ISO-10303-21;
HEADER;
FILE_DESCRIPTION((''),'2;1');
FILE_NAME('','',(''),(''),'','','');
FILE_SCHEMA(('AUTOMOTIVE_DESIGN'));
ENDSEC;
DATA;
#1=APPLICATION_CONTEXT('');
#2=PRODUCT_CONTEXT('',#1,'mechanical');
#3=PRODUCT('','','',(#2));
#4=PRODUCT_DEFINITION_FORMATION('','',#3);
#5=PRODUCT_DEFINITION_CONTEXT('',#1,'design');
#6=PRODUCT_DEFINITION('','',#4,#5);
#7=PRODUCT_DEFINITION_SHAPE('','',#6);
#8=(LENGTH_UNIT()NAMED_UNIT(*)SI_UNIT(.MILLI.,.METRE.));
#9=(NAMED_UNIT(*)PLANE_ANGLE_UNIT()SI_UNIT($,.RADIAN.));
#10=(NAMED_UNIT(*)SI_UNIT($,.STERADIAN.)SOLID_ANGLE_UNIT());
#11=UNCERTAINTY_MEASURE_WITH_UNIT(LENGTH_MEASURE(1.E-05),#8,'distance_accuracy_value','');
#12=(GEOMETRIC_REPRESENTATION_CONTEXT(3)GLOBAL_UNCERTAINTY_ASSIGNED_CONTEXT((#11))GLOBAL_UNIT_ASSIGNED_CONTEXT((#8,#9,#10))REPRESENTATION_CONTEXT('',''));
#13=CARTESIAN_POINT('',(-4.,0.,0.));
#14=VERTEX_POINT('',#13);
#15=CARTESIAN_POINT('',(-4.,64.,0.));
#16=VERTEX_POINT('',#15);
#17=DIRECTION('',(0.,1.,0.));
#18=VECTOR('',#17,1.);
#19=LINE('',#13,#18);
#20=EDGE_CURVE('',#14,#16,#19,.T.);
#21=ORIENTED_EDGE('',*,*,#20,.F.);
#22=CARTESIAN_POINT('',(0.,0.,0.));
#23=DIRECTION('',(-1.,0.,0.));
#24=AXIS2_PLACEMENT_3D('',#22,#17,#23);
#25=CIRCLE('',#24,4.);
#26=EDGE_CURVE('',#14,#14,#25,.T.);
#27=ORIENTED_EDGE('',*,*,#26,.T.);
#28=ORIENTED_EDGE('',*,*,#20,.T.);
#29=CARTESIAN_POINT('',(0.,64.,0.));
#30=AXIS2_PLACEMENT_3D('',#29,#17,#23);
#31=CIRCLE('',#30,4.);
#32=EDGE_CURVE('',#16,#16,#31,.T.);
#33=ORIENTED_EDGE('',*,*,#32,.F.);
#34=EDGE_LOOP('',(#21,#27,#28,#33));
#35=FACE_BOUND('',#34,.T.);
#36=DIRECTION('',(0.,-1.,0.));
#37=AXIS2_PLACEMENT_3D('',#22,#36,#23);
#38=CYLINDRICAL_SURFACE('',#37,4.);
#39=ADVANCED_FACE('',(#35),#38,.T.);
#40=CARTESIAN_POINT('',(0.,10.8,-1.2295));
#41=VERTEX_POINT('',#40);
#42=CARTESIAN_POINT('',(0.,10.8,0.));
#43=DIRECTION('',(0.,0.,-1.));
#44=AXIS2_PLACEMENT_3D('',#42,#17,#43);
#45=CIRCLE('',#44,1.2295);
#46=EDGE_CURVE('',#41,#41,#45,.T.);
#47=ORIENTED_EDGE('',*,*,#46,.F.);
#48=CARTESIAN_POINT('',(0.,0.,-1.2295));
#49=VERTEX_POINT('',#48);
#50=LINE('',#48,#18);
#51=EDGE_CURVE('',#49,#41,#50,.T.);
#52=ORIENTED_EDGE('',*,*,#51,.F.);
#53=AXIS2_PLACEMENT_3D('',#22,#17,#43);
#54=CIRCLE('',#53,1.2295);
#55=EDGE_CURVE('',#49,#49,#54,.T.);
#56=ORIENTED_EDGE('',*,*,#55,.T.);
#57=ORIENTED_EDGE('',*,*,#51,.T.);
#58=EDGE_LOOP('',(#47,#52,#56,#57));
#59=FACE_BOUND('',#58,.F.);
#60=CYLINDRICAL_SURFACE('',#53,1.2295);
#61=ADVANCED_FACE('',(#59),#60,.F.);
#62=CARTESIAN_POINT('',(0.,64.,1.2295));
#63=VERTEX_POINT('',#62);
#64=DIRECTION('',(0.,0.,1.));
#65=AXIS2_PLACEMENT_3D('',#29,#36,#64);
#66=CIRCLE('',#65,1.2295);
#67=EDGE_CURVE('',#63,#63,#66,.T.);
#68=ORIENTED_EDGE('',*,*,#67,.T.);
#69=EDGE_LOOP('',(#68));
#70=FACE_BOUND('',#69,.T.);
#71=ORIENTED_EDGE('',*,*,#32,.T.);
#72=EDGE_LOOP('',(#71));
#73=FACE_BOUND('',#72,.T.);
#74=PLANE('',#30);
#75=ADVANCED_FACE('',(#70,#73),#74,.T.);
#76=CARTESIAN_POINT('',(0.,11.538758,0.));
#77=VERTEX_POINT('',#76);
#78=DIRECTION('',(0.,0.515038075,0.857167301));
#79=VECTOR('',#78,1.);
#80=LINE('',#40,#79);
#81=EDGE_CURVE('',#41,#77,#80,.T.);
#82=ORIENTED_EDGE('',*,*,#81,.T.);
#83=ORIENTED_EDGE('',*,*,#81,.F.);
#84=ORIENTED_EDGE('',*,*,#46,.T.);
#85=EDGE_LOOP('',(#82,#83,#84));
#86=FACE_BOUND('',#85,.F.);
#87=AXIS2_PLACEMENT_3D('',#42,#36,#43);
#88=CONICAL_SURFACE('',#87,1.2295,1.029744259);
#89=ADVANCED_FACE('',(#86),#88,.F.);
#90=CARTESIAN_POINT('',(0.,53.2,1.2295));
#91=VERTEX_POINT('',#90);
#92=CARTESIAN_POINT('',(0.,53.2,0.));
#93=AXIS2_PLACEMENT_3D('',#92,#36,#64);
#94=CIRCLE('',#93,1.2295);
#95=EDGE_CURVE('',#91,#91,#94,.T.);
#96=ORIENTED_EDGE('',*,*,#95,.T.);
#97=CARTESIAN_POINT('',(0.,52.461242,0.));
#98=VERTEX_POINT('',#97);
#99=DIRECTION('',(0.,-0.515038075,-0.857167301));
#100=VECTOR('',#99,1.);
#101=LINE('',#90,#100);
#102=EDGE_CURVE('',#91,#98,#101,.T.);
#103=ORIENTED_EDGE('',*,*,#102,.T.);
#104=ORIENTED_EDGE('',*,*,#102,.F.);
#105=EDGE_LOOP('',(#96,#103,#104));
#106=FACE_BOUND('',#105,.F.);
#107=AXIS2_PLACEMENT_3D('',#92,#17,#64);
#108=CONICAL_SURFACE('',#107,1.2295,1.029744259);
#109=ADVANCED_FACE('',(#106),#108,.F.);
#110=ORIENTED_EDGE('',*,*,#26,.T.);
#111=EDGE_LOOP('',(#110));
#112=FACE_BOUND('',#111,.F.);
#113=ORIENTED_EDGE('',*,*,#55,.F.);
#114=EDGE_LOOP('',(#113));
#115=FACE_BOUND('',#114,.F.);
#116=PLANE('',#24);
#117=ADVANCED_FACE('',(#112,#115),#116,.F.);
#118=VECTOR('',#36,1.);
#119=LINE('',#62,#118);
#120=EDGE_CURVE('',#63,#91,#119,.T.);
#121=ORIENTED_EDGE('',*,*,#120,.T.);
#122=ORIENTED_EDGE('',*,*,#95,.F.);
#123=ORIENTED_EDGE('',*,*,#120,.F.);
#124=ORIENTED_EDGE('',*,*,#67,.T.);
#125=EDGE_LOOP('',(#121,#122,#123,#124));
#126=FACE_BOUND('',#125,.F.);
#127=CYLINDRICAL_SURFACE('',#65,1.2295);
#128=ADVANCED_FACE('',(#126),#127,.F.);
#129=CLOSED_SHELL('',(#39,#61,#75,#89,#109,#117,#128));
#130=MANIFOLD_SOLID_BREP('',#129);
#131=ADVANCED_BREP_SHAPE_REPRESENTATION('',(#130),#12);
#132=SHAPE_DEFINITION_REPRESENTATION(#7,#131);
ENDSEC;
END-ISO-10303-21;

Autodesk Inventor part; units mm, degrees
ref_plane "YZ Plane" through (0, 0, 0) normal (1, 0, 0) x (0, 1, 0)
ref_plane "XZ Plane" through (0, 0, 0) normal (0, 1, 0) x (-1, 0, 0)
ref_plane "XY Plane" through (0, 0, 0) normal (0, 0, 1) x (1, 0, 0)
sketch "Sketch1" plane through (0, 0, 0) normal (0, 1, 0) x (-1, 0, 0)
  circle A0 centre (0, 0) radius 4
  dimension "d0" = 8
extrude "Extrusion1" add sketch "Sketch1" along normal blind 64
sketch "Sketch2" plane through (0, 64, 0) normal (0, 1, 0) x (1, 0, 0)
  point P0 (0, 0)
  point P1 (0, 0)
sketch "Sketch3" plane through (0, 0, 0) normal (0, -1, 0) x (1, 0, 0)
  point P0 (0, 0)
  point P1 (0, 0)
hole "Hole1" at (0, 64, 0) direction (0, -1, 0) diameter 2.459 depth 10.8 tip angle 118 thread size "M3x0.5" class "6H" standard "ISO Metric profile"
hole "Hole2" at (0, 0, 0) direction (0, 1, 0) diameter 2.459 depth 10.8 tip angle 118 thread size "M3x0.5" class "6H" standard "ISO Metric profile"
properties part number "rod"
